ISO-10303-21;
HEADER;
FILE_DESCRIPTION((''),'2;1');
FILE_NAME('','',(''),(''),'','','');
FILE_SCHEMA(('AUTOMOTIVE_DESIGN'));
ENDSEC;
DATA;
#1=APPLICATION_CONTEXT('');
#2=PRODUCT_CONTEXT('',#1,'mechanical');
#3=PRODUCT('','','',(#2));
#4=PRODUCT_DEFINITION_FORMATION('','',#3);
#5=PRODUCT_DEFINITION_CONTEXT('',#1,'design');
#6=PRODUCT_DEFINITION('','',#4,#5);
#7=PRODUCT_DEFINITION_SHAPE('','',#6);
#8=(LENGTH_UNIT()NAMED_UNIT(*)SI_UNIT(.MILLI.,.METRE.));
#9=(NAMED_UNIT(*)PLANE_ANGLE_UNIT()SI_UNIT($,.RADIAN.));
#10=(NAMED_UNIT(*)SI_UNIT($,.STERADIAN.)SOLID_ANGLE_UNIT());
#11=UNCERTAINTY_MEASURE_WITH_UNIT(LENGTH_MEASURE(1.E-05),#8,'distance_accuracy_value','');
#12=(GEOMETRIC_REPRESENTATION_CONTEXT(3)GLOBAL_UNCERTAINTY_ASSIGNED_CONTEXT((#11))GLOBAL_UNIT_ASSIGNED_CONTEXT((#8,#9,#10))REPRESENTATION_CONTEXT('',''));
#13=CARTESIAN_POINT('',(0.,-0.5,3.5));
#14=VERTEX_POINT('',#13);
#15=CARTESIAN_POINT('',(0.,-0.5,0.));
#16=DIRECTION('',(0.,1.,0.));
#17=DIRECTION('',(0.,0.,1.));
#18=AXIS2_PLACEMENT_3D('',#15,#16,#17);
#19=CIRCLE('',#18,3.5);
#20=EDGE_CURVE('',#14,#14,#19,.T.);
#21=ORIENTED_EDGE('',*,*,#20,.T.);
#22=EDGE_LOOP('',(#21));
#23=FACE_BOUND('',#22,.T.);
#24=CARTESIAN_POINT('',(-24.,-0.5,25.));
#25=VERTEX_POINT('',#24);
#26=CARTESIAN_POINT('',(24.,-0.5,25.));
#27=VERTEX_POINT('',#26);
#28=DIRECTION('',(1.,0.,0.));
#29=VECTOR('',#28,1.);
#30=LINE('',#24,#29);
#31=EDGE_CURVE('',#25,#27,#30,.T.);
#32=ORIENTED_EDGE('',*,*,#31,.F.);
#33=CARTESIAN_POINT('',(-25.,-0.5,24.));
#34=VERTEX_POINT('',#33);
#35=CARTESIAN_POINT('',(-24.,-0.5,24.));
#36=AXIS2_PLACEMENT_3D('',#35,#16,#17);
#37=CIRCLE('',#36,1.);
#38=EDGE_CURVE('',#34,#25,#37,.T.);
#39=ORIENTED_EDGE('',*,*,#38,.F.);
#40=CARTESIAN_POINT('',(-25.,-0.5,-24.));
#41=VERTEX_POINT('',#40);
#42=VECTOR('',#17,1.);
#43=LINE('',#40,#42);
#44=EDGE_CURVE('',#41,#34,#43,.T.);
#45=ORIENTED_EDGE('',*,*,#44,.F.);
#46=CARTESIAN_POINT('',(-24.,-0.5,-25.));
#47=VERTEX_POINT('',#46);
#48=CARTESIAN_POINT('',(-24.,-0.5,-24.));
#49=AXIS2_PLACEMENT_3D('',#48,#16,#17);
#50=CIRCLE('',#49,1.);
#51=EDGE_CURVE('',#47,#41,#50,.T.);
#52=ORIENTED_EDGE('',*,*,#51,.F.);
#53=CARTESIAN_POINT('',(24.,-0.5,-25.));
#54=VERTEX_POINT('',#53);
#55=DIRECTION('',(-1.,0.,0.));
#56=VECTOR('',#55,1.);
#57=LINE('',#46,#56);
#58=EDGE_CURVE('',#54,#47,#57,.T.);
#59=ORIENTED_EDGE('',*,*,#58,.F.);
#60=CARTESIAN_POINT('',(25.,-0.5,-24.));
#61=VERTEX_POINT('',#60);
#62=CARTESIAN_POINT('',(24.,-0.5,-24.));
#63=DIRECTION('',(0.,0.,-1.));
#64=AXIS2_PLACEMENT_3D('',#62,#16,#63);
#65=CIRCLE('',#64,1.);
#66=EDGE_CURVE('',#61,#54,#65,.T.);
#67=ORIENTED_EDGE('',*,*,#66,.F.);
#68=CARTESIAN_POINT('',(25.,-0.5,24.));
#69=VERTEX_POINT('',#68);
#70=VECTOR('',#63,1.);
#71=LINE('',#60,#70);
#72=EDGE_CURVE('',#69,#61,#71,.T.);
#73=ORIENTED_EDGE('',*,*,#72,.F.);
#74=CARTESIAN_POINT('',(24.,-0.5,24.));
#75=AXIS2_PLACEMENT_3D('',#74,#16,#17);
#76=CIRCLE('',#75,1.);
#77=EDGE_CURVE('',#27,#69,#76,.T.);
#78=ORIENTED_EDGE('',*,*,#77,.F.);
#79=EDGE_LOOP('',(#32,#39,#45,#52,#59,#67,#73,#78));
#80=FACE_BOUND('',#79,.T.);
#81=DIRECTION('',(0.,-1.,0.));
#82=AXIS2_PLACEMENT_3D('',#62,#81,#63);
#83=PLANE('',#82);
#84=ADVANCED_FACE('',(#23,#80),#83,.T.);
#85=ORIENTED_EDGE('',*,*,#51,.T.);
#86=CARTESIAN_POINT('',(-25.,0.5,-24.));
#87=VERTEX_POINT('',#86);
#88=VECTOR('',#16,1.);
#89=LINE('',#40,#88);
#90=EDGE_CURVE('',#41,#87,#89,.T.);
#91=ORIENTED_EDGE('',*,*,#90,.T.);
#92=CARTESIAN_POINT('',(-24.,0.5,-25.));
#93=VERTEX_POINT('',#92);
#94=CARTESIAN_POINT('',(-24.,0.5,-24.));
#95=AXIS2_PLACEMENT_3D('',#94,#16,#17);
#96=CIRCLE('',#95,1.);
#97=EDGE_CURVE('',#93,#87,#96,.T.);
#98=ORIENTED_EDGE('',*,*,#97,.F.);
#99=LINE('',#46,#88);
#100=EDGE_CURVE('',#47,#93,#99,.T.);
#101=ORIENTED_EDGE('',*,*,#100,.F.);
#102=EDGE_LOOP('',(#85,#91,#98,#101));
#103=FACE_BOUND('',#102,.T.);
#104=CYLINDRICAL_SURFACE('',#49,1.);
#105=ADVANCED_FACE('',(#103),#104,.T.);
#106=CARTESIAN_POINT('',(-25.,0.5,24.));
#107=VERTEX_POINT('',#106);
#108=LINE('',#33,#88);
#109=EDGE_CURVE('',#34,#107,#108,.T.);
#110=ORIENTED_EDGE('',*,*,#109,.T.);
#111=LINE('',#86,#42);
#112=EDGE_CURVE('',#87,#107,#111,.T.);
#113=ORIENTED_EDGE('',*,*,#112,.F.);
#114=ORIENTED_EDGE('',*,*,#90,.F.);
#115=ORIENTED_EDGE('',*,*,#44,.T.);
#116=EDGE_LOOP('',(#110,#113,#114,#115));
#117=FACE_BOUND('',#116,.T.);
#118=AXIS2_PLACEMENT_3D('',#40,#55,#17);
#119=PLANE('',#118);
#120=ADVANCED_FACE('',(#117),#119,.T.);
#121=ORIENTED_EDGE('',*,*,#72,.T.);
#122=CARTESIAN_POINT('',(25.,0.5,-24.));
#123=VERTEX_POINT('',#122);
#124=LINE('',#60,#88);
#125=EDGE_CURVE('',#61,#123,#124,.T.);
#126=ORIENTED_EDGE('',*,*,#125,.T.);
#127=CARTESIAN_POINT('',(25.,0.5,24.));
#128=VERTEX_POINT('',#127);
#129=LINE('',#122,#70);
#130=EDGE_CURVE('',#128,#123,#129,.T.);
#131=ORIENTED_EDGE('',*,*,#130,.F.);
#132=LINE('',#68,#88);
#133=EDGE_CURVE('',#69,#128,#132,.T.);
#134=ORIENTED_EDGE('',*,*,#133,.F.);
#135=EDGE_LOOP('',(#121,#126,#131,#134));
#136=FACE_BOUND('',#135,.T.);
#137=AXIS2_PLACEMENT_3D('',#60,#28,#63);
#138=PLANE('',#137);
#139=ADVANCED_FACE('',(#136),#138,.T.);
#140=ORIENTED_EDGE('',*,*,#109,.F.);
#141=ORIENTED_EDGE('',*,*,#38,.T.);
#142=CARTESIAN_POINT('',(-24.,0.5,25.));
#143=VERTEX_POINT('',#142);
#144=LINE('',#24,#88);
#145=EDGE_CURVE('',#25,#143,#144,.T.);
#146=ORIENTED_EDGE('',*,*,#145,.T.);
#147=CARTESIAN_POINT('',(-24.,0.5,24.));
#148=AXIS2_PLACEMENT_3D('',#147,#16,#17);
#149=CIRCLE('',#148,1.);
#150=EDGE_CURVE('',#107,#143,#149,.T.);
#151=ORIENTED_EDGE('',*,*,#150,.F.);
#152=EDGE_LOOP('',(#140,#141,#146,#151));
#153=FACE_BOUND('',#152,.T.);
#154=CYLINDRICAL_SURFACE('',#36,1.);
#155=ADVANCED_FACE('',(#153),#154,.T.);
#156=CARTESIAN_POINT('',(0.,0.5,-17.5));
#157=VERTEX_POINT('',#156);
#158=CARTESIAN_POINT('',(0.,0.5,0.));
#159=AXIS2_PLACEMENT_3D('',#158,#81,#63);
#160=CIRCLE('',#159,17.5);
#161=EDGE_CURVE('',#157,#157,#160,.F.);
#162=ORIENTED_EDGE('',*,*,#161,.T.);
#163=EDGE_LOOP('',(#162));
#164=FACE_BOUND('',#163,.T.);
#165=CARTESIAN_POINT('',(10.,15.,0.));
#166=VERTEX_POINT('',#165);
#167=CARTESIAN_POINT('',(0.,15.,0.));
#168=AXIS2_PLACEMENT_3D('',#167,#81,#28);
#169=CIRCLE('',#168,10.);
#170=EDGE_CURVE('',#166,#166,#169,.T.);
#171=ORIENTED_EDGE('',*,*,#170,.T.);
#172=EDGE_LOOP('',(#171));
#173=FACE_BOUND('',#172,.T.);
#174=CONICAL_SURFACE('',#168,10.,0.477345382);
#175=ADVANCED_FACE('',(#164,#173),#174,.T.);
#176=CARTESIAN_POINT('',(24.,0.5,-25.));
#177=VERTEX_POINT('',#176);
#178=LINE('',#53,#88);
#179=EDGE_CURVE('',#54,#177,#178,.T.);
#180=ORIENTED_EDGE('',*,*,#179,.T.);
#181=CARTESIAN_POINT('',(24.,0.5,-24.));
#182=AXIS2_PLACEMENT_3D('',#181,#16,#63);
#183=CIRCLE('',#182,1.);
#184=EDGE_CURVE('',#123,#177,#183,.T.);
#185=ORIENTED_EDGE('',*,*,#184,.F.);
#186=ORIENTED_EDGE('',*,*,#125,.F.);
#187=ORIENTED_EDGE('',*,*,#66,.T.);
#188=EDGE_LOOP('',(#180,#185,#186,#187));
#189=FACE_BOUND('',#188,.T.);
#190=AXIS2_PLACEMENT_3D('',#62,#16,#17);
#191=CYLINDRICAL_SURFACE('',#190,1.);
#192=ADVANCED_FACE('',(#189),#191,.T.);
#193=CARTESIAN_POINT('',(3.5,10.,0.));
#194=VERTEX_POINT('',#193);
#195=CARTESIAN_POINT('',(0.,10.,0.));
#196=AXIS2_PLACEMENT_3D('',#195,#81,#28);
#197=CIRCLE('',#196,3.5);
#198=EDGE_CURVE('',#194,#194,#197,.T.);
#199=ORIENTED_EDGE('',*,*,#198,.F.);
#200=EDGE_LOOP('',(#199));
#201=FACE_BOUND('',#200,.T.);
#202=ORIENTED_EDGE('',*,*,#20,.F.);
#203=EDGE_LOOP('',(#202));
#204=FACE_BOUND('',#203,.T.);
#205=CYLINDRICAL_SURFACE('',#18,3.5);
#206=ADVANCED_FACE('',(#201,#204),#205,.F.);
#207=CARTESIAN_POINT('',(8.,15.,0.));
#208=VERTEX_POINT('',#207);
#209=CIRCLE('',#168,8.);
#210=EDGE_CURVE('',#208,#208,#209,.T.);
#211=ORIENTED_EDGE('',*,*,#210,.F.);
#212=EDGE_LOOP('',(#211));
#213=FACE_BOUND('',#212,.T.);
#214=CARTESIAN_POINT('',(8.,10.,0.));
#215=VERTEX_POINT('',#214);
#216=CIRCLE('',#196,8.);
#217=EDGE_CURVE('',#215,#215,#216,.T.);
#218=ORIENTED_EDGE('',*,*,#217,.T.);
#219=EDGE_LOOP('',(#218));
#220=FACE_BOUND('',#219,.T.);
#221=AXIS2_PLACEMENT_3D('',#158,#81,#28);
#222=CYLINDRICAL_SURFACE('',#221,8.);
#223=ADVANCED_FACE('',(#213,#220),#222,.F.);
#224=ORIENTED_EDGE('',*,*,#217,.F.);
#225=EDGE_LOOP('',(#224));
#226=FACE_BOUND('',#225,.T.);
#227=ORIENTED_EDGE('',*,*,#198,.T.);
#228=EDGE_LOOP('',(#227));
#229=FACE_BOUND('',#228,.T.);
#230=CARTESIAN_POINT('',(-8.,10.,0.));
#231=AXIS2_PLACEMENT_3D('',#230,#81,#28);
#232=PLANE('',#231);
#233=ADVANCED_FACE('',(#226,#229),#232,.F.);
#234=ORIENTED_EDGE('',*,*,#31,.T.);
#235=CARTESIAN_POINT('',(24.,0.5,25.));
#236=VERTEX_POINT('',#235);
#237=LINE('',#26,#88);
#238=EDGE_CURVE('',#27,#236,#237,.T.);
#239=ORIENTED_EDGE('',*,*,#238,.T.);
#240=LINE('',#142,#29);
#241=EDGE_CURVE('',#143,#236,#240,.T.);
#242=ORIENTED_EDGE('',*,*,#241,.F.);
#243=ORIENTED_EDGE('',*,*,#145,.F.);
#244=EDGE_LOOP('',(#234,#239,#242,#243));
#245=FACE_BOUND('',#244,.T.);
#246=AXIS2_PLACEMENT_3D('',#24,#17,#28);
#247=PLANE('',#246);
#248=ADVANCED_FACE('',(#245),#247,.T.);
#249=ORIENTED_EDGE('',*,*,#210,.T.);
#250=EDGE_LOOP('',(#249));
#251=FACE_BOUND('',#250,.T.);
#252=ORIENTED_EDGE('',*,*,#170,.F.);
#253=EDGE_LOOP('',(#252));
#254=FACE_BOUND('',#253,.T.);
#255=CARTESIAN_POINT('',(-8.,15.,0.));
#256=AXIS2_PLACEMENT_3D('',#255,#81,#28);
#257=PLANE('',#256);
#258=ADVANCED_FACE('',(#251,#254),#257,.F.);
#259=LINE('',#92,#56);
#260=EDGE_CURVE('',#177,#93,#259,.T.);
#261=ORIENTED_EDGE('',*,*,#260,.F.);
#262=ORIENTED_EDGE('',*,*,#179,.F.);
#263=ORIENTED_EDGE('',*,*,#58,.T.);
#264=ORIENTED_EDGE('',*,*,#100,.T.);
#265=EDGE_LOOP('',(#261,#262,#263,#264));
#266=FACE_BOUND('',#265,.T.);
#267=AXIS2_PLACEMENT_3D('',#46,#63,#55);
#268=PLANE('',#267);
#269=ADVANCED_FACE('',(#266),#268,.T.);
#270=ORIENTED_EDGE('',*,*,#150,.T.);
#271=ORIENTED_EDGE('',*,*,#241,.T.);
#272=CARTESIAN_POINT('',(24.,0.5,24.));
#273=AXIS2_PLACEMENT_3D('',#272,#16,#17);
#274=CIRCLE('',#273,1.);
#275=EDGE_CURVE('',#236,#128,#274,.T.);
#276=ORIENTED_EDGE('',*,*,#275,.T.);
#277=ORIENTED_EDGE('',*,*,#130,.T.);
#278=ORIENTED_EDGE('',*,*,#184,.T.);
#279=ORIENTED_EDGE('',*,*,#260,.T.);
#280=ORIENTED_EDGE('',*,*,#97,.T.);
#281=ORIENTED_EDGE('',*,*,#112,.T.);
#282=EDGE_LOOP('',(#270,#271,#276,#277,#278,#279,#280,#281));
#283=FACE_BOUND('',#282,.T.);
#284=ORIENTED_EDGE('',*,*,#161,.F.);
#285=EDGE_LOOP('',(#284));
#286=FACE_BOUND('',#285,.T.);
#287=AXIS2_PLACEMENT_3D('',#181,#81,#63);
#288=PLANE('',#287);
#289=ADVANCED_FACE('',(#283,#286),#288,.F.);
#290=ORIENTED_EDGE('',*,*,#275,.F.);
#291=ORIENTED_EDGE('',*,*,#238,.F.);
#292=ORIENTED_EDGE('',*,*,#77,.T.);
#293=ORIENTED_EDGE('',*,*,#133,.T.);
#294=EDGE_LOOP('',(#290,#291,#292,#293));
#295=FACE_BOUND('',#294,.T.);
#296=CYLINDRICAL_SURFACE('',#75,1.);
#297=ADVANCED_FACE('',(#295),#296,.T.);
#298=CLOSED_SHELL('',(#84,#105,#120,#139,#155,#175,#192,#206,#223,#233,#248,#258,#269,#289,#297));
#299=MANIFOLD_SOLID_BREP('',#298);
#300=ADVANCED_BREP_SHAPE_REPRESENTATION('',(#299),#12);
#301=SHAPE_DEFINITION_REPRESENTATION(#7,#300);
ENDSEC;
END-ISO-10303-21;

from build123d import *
from build123d.topology import SkipClean

# Parameters (mm, degrees)
BOSS_EXTRUDE1_DEPTH      = 0.5
BOSS_EXTRUDE1_DEPTH_BACK = 0.5
SKETCH1_R                = 3.5


with BuildPart() as part:
    # Sketch1 → Boss-Extrude1 (new, two sides: drawn at the far end of the back side and taken through both)
    with BuildSketch(Plane(origin=(0, 0, 0), x_dir=(1, 0, 0), z_dir=(0, 1, 0)).offset(-BOSS_EXTRUDE1_DEPTH_BACK)):
        with BuildLine():
            Line((-24, 25), (24, 25))
            ThreePointArc((24, 25), (24.707106781, 24.707106781), (25, 24))
            Line((25, 24), (25, -24))
            ThreePointArc((25, -24), (24.707106781, -24.707106781), (24, -25))
            Line((24, -25), (-24, -25))
            ThreePointArc((-24, -25), (-24.707106781, -24.707106781), (-25, -24))
            Line((-25, -24), (-25, 24))
            ThreePointArc((-25, 24), (-24.707106781, 24.707106781), (-24, 25))
        make_face()
        Circle(SKETCH1_R, mode=Mode.SUBTRACT)
    extrude(amount=BOSS_EXTRUDE1_DEPTH + BOSS_EXTRUDE1_DEPTH_BACK)

    # Sketch2 → Revolve1 (revolve)
    with SkipClean():  # the faces are left unmerged after this step: merging them gives an invalid solid
        with BuildSketch(Plane.XY):
            Polygon((-8, 15), (-10, 15), (-17.5, 0.5), (-3.5, 0.5), (-3.5, 10), (-8, 10), align=None)
        revolve(axis=Axis((0, 0.5, 0), (0, 1, 0)))
    add(part.part.scale(1), mode=Mode.REPLACE)  # the faces are merged on a copy


solid = part.part
